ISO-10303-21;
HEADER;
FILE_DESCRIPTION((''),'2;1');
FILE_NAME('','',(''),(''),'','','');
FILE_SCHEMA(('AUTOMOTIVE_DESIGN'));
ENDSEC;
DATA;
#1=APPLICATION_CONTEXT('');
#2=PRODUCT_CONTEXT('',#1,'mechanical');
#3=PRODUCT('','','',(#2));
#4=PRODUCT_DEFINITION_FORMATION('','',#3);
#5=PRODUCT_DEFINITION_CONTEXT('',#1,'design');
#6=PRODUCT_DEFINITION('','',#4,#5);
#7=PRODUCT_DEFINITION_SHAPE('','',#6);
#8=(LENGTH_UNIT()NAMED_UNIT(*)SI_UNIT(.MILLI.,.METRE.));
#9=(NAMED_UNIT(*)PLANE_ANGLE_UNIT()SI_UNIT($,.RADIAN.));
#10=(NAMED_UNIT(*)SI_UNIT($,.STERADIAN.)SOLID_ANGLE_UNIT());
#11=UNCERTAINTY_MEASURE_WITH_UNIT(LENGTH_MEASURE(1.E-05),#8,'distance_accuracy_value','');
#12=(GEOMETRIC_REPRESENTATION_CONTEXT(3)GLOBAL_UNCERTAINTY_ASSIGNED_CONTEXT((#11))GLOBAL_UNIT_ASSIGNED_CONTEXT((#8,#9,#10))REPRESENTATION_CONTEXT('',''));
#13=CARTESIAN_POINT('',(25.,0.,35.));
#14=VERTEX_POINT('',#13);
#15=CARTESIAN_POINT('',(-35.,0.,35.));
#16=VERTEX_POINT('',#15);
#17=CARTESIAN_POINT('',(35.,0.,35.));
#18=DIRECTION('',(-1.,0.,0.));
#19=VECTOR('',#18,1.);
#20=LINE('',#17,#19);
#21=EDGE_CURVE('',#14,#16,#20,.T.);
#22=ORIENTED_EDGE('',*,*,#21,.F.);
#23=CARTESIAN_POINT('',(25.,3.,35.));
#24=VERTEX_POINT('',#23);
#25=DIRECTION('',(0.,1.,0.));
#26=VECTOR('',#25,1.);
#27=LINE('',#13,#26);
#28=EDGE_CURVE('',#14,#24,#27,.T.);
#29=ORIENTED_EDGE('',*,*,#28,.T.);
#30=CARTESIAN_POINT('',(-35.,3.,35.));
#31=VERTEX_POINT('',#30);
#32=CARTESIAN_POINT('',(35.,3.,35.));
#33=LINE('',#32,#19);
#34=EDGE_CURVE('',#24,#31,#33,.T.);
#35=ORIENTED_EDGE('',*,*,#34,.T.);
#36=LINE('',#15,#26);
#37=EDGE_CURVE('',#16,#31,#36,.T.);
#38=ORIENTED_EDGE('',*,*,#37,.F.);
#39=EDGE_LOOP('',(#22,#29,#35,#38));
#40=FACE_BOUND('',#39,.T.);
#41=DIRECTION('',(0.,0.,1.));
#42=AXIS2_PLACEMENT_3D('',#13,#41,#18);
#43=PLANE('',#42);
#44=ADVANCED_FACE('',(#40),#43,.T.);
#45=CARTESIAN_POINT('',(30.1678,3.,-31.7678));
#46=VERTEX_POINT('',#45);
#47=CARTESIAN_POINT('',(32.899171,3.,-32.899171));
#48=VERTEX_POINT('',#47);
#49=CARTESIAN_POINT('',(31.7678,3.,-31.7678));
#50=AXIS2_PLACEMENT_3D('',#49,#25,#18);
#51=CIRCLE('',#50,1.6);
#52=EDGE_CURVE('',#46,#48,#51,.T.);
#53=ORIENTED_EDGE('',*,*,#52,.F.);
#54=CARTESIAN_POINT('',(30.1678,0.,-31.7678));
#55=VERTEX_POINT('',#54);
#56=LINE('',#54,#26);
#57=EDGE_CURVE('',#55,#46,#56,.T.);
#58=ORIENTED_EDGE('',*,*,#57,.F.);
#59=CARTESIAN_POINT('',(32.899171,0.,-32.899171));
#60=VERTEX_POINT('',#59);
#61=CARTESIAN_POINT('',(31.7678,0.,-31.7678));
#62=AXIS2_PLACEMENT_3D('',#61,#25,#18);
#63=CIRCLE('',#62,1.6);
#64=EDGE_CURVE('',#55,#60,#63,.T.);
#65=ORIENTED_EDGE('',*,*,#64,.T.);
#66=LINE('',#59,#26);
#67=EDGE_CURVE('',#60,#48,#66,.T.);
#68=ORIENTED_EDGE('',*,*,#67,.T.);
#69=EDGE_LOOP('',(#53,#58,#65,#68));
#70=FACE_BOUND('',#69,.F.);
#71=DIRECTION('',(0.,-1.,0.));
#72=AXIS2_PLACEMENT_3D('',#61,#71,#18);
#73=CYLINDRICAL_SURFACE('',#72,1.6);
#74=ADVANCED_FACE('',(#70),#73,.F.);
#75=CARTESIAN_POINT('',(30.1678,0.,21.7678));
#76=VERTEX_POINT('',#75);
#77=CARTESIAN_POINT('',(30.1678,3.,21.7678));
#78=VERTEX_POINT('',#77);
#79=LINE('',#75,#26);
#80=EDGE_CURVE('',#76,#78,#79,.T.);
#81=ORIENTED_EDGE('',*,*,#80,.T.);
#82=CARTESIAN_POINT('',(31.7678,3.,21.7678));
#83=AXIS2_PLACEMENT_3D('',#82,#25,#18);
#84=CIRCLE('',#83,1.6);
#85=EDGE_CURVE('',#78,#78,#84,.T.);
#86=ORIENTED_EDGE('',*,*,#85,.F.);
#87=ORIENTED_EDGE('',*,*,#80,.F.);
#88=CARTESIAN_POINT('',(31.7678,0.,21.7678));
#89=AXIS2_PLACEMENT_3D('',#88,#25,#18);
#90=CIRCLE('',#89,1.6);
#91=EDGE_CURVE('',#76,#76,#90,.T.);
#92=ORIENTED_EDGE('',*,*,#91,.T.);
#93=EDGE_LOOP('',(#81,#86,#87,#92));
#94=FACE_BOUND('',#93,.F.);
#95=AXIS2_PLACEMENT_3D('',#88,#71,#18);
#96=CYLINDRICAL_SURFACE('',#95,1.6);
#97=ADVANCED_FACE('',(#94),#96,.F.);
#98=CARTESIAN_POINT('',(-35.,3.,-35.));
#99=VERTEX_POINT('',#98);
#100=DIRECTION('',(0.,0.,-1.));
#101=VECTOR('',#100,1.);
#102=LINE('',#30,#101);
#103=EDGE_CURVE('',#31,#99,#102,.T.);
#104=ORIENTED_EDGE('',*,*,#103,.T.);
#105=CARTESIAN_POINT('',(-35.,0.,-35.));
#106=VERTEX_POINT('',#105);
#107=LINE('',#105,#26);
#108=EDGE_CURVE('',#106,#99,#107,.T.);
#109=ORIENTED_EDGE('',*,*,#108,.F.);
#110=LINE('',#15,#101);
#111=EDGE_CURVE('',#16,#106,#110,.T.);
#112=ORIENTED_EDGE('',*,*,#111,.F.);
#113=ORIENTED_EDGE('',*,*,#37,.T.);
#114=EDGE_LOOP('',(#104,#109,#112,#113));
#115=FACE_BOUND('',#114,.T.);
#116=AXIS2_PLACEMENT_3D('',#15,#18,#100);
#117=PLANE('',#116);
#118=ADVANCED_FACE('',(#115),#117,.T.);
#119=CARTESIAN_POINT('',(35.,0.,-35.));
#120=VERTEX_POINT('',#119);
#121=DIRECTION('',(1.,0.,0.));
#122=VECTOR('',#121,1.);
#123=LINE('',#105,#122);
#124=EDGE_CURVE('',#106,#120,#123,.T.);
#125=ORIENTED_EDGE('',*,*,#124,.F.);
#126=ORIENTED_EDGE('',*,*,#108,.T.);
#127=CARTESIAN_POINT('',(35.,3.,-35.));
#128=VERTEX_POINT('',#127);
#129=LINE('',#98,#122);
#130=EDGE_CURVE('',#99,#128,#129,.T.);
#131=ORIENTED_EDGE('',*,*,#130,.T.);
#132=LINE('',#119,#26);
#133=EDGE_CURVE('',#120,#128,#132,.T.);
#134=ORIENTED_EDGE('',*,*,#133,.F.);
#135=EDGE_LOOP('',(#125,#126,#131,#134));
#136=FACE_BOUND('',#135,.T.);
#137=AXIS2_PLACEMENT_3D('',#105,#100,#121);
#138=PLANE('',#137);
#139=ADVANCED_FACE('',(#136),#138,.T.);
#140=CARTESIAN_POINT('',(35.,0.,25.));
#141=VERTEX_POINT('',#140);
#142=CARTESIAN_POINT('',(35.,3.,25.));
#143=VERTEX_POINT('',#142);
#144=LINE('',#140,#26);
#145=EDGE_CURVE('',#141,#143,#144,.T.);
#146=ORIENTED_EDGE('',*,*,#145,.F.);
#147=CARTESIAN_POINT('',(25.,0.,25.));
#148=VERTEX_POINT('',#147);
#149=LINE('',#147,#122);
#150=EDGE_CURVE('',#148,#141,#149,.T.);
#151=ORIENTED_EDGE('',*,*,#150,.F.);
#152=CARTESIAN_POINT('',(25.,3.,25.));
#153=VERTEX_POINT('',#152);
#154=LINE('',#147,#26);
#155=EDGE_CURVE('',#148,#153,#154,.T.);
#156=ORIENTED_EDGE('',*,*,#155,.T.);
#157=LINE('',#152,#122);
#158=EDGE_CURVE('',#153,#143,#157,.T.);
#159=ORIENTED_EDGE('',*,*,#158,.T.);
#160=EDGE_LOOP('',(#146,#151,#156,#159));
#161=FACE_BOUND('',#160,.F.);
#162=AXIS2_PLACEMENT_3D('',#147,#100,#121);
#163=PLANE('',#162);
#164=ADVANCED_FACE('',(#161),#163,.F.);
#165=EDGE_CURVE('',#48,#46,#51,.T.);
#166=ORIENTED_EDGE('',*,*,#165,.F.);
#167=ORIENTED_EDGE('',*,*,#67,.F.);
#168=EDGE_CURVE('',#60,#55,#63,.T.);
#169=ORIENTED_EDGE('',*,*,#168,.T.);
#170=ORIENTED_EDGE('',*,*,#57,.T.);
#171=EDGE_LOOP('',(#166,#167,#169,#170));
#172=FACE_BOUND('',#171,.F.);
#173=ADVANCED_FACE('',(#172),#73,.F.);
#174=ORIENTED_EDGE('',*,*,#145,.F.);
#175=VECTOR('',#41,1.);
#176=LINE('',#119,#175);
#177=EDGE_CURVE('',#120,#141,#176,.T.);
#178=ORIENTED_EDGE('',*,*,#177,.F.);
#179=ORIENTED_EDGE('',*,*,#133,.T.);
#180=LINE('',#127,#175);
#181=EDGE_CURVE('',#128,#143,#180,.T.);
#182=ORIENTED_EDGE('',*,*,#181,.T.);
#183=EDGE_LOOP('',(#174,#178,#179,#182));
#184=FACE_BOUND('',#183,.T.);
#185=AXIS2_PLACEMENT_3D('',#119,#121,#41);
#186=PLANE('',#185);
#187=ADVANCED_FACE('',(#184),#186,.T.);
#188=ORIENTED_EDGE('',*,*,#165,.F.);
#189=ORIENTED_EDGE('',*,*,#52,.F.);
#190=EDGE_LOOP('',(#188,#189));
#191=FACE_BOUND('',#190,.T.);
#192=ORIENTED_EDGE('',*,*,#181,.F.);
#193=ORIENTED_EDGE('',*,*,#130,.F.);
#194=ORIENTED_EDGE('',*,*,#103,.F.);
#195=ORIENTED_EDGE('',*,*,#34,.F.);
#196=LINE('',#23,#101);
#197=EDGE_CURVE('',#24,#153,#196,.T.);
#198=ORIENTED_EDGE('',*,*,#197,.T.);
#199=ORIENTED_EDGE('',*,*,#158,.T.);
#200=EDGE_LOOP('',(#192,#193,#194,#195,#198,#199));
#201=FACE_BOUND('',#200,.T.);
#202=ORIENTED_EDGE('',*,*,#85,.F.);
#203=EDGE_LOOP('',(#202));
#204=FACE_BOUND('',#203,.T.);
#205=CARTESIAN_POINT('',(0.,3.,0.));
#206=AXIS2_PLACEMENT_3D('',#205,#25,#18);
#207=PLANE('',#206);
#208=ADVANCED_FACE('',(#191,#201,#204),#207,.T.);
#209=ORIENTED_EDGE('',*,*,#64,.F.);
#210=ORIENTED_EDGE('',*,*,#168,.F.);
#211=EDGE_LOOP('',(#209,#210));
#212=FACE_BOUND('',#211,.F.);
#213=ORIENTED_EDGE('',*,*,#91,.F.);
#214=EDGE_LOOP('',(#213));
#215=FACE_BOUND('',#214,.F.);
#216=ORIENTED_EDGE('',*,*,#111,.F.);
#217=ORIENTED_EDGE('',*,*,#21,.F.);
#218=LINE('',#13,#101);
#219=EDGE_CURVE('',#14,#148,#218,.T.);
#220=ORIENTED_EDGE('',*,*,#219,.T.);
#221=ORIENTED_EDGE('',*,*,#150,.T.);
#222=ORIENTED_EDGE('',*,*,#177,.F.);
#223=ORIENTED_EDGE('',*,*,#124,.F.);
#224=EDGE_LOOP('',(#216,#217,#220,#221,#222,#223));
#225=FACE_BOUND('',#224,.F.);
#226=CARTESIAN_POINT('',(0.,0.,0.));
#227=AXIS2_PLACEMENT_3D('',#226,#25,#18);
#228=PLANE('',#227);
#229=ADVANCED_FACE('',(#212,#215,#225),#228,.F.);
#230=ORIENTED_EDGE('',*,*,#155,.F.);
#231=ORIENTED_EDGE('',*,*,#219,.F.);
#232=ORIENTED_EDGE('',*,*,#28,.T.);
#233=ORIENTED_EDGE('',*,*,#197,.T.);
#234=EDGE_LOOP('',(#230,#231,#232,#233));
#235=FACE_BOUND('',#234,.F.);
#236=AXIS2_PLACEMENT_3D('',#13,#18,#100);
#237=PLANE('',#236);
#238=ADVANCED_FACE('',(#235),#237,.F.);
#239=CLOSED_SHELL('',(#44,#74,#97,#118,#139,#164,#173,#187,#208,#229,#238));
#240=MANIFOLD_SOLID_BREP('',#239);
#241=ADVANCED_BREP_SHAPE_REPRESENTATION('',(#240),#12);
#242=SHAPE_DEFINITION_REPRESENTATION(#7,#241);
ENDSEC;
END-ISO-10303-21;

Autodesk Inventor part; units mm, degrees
ref_plane "YZ Plane" through (0, 0, 0) normal (1, 0, 0) x (0, 1, 0)
ref_plane "XZ Plane" through (0, 0, 0) normal (0, 1, 0) x (-1, 0, 0)
ref_plane "XY Plane" through (0, 0, 0) normal (0, 0, 1) x (1, 0, 0)
sketch "Эскиз1" plane through (0, 0, 0) normal (0, 1, 0) x (-1, 0, 0)
  line L0 (-35, 35) -> (35, 35)
  line L1 (35, 35) -> (35, -35)
  line L2 (35, -35) -> (-35, -35)
  line L3 (-35, -35) -> (-35, 35)
  line L4 (-35, 35) -> (35, -35) construction
  line L5 (35, 35) -> (-35, -35) construction
  line L6 (-35, 35) -> (-25, 35)
  line L7 (-25, 35) -> (-25, 25)
  line L8 (-25, 25) -> (-35, 25)
  line L9 (-35, 25) -> (-35, 35)
  circle A0 centre (-31.7678, 21.7678) radius 1.6
  line L10 (-35, -35) -> (-31.7678, -31.7678)
  circle A1 centre (-31.7678, -31.7678) radius 1.6
  point P0 (0, 0)
  point P1 (-35, 15)
  dimension "d0" = 70
  dimension "d1" = 70
  dimension "d3" = 10
  dimension "d5" = 3.2
  dimension "d7" = 4.571
  dimension "d8" = 3.2
  dimension "d11" = 4.5711
  dimension "d12" = 10
extrude "Выдавливание1" add sketch "Эскиз1" along normal blind 3 contours L0 L1 L2 L3 L8 L7
properties part number "000.109 - Правая боковая панель заднего сегмента"
